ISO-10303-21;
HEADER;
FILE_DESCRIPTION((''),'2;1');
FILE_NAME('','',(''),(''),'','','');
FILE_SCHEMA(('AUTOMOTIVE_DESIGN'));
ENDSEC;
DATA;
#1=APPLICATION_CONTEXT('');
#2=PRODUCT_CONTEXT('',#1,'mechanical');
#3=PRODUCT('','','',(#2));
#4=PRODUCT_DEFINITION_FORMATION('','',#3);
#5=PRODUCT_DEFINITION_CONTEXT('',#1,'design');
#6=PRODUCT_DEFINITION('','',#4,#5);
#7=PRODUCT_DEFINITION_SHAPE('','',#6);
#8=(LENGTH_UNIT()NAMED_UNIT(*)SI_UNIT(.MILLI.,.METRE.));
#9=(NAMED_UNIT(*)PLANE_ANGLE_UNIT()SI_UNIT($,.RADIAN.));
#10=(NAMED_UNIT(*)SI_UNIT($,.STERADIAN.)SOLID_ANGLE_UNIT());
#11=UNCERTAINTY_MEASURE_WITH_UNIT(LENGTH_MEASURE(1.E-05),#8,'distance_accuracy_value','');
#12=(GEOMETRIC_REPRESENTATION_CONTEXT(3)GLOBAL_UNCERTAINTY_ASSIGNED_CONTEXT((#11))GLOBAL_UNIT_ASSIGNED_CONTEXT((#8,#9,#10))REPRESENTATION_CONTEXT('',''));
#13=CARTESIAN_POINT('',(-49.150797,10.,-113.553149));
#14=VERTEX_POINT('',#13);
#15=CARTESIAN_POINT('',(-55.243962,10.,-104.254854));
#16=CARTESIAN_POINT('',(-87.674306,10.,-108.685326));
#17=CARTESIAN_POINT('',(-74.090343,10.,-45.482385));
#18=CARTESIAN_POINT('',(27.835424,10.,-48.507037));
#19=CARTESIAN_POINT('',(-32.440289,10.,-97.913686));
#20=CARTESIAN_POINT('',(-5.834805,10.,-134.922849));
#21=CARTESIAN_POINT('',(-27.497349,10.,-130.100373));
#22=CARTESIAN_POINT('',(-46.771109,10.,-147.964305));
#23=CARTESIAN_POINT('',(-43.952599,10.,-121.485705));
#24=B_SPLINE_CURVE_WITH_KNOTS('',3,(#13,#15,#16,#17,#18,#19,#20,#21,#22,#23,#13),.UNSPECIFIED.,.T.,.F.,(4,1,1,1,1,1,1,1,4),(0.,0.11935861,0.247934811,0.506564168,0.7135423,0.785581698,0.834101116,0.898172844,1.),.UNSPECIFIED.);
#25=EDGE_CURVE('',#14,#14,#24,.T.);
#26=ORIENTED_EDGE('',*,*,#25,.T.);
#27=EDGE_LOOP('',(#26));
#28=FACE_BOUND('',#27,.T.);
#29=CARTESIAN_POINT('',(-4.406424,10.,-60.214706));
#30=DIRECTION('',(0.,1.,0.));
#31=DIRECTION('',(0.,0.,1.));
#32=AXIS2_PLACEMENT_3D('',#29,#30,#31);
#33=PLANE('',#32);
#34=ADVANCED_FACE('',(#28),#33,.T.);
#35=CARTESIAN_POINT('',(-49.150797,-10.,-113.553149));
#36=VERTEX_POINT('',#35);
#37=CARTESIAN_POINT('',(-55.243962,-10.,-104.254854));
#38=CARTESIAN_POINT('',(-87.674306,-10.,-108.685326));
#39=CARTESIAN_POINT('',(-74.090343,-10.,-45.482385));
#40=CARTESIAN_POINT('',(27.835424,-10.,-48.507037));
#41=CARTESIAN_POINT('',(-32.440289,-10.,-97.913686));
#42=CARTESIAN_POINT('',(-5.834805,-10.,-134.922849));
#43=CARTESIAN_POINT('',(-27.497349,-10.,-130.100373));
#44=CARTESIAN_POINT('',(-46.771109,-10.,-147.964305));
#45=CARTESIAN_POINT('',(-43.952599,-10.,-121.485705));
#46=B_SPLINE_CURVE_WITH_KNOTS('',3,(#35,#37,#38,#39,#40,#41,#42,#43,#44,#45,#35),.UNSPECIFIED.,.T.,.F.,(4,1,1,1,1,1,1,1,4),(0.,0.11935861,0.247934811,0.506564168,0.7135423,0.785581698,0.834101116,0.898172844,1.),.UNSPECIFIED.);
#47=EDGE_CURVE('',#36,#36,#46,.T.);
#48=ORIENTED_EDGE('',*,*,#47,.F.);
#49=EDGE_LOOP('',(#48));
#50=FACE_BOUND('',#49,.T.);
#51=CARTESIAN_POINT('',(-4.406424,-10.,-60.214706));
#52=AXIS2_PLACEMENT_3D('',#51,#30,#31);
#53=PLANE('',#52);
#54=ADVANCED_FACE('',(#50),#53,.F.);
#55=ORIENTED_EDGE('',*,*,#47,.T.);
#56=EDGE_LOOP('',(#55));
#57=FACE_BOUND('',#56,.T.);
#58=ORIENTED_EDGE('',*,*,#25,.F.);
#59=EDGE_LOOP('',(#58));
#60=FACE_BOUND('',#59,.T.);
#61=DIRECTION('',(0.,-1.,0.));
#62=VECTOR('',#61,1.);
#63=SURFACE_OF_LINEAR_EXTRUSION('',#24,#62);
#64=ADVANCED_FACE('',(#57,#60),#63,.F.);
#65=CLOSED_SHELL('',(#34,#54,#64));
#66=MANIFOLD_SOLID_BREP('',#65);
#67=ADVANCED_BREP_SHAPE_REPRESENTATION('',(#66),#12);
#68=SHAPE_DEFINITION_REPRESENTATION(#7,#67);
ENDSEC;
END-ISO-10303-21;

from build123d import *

# Parameters (mm, degrees)
SHEET_START           = -10
SHEET_EXTRUDE_3_DEPTH = 20


# Read off the part's stored shape, not the designer's step: Поверхность-Вытянуть3
with BuildPart() as part:
    # Sheet Extrude 3 outline → Sheet Extrude 3 (new body)
    with BuildSketch(Plane(origin=(0, 0, 0), x_dir=(1, 0, 0), z_dir=(0, 1, 0)).offset(SHEET_START)):
        with BuildLine():
            add(Edge.make_bspline(
                [(-49.150797062, 113.553148676), (-55.24396238, 104.254853534), (-87.674306087, 108.685326321), (-74.090342795, 45.482384795), (27.835423646, 48.507037029), (-32.440288994, 97.91368587), (-5.834804804, 134.922849357), (-27.497348782, 130.100372673), (-46.771108531, 147.964305176), (-43.952599031, 121.485705397), (-49.150797062, 113.553148676)],
                knots=[0, 0, 0, 0, 0.11935861, 0.247934811, 0.506564168, 0.7135423, 0.785581698, 0.834101116, 0.898172844, 1, 1, 1, 1], degree=3))
        make_face()
    extrude(amount=SHEET_EXTRUDE_3_DEPTH)


solid = part.part
